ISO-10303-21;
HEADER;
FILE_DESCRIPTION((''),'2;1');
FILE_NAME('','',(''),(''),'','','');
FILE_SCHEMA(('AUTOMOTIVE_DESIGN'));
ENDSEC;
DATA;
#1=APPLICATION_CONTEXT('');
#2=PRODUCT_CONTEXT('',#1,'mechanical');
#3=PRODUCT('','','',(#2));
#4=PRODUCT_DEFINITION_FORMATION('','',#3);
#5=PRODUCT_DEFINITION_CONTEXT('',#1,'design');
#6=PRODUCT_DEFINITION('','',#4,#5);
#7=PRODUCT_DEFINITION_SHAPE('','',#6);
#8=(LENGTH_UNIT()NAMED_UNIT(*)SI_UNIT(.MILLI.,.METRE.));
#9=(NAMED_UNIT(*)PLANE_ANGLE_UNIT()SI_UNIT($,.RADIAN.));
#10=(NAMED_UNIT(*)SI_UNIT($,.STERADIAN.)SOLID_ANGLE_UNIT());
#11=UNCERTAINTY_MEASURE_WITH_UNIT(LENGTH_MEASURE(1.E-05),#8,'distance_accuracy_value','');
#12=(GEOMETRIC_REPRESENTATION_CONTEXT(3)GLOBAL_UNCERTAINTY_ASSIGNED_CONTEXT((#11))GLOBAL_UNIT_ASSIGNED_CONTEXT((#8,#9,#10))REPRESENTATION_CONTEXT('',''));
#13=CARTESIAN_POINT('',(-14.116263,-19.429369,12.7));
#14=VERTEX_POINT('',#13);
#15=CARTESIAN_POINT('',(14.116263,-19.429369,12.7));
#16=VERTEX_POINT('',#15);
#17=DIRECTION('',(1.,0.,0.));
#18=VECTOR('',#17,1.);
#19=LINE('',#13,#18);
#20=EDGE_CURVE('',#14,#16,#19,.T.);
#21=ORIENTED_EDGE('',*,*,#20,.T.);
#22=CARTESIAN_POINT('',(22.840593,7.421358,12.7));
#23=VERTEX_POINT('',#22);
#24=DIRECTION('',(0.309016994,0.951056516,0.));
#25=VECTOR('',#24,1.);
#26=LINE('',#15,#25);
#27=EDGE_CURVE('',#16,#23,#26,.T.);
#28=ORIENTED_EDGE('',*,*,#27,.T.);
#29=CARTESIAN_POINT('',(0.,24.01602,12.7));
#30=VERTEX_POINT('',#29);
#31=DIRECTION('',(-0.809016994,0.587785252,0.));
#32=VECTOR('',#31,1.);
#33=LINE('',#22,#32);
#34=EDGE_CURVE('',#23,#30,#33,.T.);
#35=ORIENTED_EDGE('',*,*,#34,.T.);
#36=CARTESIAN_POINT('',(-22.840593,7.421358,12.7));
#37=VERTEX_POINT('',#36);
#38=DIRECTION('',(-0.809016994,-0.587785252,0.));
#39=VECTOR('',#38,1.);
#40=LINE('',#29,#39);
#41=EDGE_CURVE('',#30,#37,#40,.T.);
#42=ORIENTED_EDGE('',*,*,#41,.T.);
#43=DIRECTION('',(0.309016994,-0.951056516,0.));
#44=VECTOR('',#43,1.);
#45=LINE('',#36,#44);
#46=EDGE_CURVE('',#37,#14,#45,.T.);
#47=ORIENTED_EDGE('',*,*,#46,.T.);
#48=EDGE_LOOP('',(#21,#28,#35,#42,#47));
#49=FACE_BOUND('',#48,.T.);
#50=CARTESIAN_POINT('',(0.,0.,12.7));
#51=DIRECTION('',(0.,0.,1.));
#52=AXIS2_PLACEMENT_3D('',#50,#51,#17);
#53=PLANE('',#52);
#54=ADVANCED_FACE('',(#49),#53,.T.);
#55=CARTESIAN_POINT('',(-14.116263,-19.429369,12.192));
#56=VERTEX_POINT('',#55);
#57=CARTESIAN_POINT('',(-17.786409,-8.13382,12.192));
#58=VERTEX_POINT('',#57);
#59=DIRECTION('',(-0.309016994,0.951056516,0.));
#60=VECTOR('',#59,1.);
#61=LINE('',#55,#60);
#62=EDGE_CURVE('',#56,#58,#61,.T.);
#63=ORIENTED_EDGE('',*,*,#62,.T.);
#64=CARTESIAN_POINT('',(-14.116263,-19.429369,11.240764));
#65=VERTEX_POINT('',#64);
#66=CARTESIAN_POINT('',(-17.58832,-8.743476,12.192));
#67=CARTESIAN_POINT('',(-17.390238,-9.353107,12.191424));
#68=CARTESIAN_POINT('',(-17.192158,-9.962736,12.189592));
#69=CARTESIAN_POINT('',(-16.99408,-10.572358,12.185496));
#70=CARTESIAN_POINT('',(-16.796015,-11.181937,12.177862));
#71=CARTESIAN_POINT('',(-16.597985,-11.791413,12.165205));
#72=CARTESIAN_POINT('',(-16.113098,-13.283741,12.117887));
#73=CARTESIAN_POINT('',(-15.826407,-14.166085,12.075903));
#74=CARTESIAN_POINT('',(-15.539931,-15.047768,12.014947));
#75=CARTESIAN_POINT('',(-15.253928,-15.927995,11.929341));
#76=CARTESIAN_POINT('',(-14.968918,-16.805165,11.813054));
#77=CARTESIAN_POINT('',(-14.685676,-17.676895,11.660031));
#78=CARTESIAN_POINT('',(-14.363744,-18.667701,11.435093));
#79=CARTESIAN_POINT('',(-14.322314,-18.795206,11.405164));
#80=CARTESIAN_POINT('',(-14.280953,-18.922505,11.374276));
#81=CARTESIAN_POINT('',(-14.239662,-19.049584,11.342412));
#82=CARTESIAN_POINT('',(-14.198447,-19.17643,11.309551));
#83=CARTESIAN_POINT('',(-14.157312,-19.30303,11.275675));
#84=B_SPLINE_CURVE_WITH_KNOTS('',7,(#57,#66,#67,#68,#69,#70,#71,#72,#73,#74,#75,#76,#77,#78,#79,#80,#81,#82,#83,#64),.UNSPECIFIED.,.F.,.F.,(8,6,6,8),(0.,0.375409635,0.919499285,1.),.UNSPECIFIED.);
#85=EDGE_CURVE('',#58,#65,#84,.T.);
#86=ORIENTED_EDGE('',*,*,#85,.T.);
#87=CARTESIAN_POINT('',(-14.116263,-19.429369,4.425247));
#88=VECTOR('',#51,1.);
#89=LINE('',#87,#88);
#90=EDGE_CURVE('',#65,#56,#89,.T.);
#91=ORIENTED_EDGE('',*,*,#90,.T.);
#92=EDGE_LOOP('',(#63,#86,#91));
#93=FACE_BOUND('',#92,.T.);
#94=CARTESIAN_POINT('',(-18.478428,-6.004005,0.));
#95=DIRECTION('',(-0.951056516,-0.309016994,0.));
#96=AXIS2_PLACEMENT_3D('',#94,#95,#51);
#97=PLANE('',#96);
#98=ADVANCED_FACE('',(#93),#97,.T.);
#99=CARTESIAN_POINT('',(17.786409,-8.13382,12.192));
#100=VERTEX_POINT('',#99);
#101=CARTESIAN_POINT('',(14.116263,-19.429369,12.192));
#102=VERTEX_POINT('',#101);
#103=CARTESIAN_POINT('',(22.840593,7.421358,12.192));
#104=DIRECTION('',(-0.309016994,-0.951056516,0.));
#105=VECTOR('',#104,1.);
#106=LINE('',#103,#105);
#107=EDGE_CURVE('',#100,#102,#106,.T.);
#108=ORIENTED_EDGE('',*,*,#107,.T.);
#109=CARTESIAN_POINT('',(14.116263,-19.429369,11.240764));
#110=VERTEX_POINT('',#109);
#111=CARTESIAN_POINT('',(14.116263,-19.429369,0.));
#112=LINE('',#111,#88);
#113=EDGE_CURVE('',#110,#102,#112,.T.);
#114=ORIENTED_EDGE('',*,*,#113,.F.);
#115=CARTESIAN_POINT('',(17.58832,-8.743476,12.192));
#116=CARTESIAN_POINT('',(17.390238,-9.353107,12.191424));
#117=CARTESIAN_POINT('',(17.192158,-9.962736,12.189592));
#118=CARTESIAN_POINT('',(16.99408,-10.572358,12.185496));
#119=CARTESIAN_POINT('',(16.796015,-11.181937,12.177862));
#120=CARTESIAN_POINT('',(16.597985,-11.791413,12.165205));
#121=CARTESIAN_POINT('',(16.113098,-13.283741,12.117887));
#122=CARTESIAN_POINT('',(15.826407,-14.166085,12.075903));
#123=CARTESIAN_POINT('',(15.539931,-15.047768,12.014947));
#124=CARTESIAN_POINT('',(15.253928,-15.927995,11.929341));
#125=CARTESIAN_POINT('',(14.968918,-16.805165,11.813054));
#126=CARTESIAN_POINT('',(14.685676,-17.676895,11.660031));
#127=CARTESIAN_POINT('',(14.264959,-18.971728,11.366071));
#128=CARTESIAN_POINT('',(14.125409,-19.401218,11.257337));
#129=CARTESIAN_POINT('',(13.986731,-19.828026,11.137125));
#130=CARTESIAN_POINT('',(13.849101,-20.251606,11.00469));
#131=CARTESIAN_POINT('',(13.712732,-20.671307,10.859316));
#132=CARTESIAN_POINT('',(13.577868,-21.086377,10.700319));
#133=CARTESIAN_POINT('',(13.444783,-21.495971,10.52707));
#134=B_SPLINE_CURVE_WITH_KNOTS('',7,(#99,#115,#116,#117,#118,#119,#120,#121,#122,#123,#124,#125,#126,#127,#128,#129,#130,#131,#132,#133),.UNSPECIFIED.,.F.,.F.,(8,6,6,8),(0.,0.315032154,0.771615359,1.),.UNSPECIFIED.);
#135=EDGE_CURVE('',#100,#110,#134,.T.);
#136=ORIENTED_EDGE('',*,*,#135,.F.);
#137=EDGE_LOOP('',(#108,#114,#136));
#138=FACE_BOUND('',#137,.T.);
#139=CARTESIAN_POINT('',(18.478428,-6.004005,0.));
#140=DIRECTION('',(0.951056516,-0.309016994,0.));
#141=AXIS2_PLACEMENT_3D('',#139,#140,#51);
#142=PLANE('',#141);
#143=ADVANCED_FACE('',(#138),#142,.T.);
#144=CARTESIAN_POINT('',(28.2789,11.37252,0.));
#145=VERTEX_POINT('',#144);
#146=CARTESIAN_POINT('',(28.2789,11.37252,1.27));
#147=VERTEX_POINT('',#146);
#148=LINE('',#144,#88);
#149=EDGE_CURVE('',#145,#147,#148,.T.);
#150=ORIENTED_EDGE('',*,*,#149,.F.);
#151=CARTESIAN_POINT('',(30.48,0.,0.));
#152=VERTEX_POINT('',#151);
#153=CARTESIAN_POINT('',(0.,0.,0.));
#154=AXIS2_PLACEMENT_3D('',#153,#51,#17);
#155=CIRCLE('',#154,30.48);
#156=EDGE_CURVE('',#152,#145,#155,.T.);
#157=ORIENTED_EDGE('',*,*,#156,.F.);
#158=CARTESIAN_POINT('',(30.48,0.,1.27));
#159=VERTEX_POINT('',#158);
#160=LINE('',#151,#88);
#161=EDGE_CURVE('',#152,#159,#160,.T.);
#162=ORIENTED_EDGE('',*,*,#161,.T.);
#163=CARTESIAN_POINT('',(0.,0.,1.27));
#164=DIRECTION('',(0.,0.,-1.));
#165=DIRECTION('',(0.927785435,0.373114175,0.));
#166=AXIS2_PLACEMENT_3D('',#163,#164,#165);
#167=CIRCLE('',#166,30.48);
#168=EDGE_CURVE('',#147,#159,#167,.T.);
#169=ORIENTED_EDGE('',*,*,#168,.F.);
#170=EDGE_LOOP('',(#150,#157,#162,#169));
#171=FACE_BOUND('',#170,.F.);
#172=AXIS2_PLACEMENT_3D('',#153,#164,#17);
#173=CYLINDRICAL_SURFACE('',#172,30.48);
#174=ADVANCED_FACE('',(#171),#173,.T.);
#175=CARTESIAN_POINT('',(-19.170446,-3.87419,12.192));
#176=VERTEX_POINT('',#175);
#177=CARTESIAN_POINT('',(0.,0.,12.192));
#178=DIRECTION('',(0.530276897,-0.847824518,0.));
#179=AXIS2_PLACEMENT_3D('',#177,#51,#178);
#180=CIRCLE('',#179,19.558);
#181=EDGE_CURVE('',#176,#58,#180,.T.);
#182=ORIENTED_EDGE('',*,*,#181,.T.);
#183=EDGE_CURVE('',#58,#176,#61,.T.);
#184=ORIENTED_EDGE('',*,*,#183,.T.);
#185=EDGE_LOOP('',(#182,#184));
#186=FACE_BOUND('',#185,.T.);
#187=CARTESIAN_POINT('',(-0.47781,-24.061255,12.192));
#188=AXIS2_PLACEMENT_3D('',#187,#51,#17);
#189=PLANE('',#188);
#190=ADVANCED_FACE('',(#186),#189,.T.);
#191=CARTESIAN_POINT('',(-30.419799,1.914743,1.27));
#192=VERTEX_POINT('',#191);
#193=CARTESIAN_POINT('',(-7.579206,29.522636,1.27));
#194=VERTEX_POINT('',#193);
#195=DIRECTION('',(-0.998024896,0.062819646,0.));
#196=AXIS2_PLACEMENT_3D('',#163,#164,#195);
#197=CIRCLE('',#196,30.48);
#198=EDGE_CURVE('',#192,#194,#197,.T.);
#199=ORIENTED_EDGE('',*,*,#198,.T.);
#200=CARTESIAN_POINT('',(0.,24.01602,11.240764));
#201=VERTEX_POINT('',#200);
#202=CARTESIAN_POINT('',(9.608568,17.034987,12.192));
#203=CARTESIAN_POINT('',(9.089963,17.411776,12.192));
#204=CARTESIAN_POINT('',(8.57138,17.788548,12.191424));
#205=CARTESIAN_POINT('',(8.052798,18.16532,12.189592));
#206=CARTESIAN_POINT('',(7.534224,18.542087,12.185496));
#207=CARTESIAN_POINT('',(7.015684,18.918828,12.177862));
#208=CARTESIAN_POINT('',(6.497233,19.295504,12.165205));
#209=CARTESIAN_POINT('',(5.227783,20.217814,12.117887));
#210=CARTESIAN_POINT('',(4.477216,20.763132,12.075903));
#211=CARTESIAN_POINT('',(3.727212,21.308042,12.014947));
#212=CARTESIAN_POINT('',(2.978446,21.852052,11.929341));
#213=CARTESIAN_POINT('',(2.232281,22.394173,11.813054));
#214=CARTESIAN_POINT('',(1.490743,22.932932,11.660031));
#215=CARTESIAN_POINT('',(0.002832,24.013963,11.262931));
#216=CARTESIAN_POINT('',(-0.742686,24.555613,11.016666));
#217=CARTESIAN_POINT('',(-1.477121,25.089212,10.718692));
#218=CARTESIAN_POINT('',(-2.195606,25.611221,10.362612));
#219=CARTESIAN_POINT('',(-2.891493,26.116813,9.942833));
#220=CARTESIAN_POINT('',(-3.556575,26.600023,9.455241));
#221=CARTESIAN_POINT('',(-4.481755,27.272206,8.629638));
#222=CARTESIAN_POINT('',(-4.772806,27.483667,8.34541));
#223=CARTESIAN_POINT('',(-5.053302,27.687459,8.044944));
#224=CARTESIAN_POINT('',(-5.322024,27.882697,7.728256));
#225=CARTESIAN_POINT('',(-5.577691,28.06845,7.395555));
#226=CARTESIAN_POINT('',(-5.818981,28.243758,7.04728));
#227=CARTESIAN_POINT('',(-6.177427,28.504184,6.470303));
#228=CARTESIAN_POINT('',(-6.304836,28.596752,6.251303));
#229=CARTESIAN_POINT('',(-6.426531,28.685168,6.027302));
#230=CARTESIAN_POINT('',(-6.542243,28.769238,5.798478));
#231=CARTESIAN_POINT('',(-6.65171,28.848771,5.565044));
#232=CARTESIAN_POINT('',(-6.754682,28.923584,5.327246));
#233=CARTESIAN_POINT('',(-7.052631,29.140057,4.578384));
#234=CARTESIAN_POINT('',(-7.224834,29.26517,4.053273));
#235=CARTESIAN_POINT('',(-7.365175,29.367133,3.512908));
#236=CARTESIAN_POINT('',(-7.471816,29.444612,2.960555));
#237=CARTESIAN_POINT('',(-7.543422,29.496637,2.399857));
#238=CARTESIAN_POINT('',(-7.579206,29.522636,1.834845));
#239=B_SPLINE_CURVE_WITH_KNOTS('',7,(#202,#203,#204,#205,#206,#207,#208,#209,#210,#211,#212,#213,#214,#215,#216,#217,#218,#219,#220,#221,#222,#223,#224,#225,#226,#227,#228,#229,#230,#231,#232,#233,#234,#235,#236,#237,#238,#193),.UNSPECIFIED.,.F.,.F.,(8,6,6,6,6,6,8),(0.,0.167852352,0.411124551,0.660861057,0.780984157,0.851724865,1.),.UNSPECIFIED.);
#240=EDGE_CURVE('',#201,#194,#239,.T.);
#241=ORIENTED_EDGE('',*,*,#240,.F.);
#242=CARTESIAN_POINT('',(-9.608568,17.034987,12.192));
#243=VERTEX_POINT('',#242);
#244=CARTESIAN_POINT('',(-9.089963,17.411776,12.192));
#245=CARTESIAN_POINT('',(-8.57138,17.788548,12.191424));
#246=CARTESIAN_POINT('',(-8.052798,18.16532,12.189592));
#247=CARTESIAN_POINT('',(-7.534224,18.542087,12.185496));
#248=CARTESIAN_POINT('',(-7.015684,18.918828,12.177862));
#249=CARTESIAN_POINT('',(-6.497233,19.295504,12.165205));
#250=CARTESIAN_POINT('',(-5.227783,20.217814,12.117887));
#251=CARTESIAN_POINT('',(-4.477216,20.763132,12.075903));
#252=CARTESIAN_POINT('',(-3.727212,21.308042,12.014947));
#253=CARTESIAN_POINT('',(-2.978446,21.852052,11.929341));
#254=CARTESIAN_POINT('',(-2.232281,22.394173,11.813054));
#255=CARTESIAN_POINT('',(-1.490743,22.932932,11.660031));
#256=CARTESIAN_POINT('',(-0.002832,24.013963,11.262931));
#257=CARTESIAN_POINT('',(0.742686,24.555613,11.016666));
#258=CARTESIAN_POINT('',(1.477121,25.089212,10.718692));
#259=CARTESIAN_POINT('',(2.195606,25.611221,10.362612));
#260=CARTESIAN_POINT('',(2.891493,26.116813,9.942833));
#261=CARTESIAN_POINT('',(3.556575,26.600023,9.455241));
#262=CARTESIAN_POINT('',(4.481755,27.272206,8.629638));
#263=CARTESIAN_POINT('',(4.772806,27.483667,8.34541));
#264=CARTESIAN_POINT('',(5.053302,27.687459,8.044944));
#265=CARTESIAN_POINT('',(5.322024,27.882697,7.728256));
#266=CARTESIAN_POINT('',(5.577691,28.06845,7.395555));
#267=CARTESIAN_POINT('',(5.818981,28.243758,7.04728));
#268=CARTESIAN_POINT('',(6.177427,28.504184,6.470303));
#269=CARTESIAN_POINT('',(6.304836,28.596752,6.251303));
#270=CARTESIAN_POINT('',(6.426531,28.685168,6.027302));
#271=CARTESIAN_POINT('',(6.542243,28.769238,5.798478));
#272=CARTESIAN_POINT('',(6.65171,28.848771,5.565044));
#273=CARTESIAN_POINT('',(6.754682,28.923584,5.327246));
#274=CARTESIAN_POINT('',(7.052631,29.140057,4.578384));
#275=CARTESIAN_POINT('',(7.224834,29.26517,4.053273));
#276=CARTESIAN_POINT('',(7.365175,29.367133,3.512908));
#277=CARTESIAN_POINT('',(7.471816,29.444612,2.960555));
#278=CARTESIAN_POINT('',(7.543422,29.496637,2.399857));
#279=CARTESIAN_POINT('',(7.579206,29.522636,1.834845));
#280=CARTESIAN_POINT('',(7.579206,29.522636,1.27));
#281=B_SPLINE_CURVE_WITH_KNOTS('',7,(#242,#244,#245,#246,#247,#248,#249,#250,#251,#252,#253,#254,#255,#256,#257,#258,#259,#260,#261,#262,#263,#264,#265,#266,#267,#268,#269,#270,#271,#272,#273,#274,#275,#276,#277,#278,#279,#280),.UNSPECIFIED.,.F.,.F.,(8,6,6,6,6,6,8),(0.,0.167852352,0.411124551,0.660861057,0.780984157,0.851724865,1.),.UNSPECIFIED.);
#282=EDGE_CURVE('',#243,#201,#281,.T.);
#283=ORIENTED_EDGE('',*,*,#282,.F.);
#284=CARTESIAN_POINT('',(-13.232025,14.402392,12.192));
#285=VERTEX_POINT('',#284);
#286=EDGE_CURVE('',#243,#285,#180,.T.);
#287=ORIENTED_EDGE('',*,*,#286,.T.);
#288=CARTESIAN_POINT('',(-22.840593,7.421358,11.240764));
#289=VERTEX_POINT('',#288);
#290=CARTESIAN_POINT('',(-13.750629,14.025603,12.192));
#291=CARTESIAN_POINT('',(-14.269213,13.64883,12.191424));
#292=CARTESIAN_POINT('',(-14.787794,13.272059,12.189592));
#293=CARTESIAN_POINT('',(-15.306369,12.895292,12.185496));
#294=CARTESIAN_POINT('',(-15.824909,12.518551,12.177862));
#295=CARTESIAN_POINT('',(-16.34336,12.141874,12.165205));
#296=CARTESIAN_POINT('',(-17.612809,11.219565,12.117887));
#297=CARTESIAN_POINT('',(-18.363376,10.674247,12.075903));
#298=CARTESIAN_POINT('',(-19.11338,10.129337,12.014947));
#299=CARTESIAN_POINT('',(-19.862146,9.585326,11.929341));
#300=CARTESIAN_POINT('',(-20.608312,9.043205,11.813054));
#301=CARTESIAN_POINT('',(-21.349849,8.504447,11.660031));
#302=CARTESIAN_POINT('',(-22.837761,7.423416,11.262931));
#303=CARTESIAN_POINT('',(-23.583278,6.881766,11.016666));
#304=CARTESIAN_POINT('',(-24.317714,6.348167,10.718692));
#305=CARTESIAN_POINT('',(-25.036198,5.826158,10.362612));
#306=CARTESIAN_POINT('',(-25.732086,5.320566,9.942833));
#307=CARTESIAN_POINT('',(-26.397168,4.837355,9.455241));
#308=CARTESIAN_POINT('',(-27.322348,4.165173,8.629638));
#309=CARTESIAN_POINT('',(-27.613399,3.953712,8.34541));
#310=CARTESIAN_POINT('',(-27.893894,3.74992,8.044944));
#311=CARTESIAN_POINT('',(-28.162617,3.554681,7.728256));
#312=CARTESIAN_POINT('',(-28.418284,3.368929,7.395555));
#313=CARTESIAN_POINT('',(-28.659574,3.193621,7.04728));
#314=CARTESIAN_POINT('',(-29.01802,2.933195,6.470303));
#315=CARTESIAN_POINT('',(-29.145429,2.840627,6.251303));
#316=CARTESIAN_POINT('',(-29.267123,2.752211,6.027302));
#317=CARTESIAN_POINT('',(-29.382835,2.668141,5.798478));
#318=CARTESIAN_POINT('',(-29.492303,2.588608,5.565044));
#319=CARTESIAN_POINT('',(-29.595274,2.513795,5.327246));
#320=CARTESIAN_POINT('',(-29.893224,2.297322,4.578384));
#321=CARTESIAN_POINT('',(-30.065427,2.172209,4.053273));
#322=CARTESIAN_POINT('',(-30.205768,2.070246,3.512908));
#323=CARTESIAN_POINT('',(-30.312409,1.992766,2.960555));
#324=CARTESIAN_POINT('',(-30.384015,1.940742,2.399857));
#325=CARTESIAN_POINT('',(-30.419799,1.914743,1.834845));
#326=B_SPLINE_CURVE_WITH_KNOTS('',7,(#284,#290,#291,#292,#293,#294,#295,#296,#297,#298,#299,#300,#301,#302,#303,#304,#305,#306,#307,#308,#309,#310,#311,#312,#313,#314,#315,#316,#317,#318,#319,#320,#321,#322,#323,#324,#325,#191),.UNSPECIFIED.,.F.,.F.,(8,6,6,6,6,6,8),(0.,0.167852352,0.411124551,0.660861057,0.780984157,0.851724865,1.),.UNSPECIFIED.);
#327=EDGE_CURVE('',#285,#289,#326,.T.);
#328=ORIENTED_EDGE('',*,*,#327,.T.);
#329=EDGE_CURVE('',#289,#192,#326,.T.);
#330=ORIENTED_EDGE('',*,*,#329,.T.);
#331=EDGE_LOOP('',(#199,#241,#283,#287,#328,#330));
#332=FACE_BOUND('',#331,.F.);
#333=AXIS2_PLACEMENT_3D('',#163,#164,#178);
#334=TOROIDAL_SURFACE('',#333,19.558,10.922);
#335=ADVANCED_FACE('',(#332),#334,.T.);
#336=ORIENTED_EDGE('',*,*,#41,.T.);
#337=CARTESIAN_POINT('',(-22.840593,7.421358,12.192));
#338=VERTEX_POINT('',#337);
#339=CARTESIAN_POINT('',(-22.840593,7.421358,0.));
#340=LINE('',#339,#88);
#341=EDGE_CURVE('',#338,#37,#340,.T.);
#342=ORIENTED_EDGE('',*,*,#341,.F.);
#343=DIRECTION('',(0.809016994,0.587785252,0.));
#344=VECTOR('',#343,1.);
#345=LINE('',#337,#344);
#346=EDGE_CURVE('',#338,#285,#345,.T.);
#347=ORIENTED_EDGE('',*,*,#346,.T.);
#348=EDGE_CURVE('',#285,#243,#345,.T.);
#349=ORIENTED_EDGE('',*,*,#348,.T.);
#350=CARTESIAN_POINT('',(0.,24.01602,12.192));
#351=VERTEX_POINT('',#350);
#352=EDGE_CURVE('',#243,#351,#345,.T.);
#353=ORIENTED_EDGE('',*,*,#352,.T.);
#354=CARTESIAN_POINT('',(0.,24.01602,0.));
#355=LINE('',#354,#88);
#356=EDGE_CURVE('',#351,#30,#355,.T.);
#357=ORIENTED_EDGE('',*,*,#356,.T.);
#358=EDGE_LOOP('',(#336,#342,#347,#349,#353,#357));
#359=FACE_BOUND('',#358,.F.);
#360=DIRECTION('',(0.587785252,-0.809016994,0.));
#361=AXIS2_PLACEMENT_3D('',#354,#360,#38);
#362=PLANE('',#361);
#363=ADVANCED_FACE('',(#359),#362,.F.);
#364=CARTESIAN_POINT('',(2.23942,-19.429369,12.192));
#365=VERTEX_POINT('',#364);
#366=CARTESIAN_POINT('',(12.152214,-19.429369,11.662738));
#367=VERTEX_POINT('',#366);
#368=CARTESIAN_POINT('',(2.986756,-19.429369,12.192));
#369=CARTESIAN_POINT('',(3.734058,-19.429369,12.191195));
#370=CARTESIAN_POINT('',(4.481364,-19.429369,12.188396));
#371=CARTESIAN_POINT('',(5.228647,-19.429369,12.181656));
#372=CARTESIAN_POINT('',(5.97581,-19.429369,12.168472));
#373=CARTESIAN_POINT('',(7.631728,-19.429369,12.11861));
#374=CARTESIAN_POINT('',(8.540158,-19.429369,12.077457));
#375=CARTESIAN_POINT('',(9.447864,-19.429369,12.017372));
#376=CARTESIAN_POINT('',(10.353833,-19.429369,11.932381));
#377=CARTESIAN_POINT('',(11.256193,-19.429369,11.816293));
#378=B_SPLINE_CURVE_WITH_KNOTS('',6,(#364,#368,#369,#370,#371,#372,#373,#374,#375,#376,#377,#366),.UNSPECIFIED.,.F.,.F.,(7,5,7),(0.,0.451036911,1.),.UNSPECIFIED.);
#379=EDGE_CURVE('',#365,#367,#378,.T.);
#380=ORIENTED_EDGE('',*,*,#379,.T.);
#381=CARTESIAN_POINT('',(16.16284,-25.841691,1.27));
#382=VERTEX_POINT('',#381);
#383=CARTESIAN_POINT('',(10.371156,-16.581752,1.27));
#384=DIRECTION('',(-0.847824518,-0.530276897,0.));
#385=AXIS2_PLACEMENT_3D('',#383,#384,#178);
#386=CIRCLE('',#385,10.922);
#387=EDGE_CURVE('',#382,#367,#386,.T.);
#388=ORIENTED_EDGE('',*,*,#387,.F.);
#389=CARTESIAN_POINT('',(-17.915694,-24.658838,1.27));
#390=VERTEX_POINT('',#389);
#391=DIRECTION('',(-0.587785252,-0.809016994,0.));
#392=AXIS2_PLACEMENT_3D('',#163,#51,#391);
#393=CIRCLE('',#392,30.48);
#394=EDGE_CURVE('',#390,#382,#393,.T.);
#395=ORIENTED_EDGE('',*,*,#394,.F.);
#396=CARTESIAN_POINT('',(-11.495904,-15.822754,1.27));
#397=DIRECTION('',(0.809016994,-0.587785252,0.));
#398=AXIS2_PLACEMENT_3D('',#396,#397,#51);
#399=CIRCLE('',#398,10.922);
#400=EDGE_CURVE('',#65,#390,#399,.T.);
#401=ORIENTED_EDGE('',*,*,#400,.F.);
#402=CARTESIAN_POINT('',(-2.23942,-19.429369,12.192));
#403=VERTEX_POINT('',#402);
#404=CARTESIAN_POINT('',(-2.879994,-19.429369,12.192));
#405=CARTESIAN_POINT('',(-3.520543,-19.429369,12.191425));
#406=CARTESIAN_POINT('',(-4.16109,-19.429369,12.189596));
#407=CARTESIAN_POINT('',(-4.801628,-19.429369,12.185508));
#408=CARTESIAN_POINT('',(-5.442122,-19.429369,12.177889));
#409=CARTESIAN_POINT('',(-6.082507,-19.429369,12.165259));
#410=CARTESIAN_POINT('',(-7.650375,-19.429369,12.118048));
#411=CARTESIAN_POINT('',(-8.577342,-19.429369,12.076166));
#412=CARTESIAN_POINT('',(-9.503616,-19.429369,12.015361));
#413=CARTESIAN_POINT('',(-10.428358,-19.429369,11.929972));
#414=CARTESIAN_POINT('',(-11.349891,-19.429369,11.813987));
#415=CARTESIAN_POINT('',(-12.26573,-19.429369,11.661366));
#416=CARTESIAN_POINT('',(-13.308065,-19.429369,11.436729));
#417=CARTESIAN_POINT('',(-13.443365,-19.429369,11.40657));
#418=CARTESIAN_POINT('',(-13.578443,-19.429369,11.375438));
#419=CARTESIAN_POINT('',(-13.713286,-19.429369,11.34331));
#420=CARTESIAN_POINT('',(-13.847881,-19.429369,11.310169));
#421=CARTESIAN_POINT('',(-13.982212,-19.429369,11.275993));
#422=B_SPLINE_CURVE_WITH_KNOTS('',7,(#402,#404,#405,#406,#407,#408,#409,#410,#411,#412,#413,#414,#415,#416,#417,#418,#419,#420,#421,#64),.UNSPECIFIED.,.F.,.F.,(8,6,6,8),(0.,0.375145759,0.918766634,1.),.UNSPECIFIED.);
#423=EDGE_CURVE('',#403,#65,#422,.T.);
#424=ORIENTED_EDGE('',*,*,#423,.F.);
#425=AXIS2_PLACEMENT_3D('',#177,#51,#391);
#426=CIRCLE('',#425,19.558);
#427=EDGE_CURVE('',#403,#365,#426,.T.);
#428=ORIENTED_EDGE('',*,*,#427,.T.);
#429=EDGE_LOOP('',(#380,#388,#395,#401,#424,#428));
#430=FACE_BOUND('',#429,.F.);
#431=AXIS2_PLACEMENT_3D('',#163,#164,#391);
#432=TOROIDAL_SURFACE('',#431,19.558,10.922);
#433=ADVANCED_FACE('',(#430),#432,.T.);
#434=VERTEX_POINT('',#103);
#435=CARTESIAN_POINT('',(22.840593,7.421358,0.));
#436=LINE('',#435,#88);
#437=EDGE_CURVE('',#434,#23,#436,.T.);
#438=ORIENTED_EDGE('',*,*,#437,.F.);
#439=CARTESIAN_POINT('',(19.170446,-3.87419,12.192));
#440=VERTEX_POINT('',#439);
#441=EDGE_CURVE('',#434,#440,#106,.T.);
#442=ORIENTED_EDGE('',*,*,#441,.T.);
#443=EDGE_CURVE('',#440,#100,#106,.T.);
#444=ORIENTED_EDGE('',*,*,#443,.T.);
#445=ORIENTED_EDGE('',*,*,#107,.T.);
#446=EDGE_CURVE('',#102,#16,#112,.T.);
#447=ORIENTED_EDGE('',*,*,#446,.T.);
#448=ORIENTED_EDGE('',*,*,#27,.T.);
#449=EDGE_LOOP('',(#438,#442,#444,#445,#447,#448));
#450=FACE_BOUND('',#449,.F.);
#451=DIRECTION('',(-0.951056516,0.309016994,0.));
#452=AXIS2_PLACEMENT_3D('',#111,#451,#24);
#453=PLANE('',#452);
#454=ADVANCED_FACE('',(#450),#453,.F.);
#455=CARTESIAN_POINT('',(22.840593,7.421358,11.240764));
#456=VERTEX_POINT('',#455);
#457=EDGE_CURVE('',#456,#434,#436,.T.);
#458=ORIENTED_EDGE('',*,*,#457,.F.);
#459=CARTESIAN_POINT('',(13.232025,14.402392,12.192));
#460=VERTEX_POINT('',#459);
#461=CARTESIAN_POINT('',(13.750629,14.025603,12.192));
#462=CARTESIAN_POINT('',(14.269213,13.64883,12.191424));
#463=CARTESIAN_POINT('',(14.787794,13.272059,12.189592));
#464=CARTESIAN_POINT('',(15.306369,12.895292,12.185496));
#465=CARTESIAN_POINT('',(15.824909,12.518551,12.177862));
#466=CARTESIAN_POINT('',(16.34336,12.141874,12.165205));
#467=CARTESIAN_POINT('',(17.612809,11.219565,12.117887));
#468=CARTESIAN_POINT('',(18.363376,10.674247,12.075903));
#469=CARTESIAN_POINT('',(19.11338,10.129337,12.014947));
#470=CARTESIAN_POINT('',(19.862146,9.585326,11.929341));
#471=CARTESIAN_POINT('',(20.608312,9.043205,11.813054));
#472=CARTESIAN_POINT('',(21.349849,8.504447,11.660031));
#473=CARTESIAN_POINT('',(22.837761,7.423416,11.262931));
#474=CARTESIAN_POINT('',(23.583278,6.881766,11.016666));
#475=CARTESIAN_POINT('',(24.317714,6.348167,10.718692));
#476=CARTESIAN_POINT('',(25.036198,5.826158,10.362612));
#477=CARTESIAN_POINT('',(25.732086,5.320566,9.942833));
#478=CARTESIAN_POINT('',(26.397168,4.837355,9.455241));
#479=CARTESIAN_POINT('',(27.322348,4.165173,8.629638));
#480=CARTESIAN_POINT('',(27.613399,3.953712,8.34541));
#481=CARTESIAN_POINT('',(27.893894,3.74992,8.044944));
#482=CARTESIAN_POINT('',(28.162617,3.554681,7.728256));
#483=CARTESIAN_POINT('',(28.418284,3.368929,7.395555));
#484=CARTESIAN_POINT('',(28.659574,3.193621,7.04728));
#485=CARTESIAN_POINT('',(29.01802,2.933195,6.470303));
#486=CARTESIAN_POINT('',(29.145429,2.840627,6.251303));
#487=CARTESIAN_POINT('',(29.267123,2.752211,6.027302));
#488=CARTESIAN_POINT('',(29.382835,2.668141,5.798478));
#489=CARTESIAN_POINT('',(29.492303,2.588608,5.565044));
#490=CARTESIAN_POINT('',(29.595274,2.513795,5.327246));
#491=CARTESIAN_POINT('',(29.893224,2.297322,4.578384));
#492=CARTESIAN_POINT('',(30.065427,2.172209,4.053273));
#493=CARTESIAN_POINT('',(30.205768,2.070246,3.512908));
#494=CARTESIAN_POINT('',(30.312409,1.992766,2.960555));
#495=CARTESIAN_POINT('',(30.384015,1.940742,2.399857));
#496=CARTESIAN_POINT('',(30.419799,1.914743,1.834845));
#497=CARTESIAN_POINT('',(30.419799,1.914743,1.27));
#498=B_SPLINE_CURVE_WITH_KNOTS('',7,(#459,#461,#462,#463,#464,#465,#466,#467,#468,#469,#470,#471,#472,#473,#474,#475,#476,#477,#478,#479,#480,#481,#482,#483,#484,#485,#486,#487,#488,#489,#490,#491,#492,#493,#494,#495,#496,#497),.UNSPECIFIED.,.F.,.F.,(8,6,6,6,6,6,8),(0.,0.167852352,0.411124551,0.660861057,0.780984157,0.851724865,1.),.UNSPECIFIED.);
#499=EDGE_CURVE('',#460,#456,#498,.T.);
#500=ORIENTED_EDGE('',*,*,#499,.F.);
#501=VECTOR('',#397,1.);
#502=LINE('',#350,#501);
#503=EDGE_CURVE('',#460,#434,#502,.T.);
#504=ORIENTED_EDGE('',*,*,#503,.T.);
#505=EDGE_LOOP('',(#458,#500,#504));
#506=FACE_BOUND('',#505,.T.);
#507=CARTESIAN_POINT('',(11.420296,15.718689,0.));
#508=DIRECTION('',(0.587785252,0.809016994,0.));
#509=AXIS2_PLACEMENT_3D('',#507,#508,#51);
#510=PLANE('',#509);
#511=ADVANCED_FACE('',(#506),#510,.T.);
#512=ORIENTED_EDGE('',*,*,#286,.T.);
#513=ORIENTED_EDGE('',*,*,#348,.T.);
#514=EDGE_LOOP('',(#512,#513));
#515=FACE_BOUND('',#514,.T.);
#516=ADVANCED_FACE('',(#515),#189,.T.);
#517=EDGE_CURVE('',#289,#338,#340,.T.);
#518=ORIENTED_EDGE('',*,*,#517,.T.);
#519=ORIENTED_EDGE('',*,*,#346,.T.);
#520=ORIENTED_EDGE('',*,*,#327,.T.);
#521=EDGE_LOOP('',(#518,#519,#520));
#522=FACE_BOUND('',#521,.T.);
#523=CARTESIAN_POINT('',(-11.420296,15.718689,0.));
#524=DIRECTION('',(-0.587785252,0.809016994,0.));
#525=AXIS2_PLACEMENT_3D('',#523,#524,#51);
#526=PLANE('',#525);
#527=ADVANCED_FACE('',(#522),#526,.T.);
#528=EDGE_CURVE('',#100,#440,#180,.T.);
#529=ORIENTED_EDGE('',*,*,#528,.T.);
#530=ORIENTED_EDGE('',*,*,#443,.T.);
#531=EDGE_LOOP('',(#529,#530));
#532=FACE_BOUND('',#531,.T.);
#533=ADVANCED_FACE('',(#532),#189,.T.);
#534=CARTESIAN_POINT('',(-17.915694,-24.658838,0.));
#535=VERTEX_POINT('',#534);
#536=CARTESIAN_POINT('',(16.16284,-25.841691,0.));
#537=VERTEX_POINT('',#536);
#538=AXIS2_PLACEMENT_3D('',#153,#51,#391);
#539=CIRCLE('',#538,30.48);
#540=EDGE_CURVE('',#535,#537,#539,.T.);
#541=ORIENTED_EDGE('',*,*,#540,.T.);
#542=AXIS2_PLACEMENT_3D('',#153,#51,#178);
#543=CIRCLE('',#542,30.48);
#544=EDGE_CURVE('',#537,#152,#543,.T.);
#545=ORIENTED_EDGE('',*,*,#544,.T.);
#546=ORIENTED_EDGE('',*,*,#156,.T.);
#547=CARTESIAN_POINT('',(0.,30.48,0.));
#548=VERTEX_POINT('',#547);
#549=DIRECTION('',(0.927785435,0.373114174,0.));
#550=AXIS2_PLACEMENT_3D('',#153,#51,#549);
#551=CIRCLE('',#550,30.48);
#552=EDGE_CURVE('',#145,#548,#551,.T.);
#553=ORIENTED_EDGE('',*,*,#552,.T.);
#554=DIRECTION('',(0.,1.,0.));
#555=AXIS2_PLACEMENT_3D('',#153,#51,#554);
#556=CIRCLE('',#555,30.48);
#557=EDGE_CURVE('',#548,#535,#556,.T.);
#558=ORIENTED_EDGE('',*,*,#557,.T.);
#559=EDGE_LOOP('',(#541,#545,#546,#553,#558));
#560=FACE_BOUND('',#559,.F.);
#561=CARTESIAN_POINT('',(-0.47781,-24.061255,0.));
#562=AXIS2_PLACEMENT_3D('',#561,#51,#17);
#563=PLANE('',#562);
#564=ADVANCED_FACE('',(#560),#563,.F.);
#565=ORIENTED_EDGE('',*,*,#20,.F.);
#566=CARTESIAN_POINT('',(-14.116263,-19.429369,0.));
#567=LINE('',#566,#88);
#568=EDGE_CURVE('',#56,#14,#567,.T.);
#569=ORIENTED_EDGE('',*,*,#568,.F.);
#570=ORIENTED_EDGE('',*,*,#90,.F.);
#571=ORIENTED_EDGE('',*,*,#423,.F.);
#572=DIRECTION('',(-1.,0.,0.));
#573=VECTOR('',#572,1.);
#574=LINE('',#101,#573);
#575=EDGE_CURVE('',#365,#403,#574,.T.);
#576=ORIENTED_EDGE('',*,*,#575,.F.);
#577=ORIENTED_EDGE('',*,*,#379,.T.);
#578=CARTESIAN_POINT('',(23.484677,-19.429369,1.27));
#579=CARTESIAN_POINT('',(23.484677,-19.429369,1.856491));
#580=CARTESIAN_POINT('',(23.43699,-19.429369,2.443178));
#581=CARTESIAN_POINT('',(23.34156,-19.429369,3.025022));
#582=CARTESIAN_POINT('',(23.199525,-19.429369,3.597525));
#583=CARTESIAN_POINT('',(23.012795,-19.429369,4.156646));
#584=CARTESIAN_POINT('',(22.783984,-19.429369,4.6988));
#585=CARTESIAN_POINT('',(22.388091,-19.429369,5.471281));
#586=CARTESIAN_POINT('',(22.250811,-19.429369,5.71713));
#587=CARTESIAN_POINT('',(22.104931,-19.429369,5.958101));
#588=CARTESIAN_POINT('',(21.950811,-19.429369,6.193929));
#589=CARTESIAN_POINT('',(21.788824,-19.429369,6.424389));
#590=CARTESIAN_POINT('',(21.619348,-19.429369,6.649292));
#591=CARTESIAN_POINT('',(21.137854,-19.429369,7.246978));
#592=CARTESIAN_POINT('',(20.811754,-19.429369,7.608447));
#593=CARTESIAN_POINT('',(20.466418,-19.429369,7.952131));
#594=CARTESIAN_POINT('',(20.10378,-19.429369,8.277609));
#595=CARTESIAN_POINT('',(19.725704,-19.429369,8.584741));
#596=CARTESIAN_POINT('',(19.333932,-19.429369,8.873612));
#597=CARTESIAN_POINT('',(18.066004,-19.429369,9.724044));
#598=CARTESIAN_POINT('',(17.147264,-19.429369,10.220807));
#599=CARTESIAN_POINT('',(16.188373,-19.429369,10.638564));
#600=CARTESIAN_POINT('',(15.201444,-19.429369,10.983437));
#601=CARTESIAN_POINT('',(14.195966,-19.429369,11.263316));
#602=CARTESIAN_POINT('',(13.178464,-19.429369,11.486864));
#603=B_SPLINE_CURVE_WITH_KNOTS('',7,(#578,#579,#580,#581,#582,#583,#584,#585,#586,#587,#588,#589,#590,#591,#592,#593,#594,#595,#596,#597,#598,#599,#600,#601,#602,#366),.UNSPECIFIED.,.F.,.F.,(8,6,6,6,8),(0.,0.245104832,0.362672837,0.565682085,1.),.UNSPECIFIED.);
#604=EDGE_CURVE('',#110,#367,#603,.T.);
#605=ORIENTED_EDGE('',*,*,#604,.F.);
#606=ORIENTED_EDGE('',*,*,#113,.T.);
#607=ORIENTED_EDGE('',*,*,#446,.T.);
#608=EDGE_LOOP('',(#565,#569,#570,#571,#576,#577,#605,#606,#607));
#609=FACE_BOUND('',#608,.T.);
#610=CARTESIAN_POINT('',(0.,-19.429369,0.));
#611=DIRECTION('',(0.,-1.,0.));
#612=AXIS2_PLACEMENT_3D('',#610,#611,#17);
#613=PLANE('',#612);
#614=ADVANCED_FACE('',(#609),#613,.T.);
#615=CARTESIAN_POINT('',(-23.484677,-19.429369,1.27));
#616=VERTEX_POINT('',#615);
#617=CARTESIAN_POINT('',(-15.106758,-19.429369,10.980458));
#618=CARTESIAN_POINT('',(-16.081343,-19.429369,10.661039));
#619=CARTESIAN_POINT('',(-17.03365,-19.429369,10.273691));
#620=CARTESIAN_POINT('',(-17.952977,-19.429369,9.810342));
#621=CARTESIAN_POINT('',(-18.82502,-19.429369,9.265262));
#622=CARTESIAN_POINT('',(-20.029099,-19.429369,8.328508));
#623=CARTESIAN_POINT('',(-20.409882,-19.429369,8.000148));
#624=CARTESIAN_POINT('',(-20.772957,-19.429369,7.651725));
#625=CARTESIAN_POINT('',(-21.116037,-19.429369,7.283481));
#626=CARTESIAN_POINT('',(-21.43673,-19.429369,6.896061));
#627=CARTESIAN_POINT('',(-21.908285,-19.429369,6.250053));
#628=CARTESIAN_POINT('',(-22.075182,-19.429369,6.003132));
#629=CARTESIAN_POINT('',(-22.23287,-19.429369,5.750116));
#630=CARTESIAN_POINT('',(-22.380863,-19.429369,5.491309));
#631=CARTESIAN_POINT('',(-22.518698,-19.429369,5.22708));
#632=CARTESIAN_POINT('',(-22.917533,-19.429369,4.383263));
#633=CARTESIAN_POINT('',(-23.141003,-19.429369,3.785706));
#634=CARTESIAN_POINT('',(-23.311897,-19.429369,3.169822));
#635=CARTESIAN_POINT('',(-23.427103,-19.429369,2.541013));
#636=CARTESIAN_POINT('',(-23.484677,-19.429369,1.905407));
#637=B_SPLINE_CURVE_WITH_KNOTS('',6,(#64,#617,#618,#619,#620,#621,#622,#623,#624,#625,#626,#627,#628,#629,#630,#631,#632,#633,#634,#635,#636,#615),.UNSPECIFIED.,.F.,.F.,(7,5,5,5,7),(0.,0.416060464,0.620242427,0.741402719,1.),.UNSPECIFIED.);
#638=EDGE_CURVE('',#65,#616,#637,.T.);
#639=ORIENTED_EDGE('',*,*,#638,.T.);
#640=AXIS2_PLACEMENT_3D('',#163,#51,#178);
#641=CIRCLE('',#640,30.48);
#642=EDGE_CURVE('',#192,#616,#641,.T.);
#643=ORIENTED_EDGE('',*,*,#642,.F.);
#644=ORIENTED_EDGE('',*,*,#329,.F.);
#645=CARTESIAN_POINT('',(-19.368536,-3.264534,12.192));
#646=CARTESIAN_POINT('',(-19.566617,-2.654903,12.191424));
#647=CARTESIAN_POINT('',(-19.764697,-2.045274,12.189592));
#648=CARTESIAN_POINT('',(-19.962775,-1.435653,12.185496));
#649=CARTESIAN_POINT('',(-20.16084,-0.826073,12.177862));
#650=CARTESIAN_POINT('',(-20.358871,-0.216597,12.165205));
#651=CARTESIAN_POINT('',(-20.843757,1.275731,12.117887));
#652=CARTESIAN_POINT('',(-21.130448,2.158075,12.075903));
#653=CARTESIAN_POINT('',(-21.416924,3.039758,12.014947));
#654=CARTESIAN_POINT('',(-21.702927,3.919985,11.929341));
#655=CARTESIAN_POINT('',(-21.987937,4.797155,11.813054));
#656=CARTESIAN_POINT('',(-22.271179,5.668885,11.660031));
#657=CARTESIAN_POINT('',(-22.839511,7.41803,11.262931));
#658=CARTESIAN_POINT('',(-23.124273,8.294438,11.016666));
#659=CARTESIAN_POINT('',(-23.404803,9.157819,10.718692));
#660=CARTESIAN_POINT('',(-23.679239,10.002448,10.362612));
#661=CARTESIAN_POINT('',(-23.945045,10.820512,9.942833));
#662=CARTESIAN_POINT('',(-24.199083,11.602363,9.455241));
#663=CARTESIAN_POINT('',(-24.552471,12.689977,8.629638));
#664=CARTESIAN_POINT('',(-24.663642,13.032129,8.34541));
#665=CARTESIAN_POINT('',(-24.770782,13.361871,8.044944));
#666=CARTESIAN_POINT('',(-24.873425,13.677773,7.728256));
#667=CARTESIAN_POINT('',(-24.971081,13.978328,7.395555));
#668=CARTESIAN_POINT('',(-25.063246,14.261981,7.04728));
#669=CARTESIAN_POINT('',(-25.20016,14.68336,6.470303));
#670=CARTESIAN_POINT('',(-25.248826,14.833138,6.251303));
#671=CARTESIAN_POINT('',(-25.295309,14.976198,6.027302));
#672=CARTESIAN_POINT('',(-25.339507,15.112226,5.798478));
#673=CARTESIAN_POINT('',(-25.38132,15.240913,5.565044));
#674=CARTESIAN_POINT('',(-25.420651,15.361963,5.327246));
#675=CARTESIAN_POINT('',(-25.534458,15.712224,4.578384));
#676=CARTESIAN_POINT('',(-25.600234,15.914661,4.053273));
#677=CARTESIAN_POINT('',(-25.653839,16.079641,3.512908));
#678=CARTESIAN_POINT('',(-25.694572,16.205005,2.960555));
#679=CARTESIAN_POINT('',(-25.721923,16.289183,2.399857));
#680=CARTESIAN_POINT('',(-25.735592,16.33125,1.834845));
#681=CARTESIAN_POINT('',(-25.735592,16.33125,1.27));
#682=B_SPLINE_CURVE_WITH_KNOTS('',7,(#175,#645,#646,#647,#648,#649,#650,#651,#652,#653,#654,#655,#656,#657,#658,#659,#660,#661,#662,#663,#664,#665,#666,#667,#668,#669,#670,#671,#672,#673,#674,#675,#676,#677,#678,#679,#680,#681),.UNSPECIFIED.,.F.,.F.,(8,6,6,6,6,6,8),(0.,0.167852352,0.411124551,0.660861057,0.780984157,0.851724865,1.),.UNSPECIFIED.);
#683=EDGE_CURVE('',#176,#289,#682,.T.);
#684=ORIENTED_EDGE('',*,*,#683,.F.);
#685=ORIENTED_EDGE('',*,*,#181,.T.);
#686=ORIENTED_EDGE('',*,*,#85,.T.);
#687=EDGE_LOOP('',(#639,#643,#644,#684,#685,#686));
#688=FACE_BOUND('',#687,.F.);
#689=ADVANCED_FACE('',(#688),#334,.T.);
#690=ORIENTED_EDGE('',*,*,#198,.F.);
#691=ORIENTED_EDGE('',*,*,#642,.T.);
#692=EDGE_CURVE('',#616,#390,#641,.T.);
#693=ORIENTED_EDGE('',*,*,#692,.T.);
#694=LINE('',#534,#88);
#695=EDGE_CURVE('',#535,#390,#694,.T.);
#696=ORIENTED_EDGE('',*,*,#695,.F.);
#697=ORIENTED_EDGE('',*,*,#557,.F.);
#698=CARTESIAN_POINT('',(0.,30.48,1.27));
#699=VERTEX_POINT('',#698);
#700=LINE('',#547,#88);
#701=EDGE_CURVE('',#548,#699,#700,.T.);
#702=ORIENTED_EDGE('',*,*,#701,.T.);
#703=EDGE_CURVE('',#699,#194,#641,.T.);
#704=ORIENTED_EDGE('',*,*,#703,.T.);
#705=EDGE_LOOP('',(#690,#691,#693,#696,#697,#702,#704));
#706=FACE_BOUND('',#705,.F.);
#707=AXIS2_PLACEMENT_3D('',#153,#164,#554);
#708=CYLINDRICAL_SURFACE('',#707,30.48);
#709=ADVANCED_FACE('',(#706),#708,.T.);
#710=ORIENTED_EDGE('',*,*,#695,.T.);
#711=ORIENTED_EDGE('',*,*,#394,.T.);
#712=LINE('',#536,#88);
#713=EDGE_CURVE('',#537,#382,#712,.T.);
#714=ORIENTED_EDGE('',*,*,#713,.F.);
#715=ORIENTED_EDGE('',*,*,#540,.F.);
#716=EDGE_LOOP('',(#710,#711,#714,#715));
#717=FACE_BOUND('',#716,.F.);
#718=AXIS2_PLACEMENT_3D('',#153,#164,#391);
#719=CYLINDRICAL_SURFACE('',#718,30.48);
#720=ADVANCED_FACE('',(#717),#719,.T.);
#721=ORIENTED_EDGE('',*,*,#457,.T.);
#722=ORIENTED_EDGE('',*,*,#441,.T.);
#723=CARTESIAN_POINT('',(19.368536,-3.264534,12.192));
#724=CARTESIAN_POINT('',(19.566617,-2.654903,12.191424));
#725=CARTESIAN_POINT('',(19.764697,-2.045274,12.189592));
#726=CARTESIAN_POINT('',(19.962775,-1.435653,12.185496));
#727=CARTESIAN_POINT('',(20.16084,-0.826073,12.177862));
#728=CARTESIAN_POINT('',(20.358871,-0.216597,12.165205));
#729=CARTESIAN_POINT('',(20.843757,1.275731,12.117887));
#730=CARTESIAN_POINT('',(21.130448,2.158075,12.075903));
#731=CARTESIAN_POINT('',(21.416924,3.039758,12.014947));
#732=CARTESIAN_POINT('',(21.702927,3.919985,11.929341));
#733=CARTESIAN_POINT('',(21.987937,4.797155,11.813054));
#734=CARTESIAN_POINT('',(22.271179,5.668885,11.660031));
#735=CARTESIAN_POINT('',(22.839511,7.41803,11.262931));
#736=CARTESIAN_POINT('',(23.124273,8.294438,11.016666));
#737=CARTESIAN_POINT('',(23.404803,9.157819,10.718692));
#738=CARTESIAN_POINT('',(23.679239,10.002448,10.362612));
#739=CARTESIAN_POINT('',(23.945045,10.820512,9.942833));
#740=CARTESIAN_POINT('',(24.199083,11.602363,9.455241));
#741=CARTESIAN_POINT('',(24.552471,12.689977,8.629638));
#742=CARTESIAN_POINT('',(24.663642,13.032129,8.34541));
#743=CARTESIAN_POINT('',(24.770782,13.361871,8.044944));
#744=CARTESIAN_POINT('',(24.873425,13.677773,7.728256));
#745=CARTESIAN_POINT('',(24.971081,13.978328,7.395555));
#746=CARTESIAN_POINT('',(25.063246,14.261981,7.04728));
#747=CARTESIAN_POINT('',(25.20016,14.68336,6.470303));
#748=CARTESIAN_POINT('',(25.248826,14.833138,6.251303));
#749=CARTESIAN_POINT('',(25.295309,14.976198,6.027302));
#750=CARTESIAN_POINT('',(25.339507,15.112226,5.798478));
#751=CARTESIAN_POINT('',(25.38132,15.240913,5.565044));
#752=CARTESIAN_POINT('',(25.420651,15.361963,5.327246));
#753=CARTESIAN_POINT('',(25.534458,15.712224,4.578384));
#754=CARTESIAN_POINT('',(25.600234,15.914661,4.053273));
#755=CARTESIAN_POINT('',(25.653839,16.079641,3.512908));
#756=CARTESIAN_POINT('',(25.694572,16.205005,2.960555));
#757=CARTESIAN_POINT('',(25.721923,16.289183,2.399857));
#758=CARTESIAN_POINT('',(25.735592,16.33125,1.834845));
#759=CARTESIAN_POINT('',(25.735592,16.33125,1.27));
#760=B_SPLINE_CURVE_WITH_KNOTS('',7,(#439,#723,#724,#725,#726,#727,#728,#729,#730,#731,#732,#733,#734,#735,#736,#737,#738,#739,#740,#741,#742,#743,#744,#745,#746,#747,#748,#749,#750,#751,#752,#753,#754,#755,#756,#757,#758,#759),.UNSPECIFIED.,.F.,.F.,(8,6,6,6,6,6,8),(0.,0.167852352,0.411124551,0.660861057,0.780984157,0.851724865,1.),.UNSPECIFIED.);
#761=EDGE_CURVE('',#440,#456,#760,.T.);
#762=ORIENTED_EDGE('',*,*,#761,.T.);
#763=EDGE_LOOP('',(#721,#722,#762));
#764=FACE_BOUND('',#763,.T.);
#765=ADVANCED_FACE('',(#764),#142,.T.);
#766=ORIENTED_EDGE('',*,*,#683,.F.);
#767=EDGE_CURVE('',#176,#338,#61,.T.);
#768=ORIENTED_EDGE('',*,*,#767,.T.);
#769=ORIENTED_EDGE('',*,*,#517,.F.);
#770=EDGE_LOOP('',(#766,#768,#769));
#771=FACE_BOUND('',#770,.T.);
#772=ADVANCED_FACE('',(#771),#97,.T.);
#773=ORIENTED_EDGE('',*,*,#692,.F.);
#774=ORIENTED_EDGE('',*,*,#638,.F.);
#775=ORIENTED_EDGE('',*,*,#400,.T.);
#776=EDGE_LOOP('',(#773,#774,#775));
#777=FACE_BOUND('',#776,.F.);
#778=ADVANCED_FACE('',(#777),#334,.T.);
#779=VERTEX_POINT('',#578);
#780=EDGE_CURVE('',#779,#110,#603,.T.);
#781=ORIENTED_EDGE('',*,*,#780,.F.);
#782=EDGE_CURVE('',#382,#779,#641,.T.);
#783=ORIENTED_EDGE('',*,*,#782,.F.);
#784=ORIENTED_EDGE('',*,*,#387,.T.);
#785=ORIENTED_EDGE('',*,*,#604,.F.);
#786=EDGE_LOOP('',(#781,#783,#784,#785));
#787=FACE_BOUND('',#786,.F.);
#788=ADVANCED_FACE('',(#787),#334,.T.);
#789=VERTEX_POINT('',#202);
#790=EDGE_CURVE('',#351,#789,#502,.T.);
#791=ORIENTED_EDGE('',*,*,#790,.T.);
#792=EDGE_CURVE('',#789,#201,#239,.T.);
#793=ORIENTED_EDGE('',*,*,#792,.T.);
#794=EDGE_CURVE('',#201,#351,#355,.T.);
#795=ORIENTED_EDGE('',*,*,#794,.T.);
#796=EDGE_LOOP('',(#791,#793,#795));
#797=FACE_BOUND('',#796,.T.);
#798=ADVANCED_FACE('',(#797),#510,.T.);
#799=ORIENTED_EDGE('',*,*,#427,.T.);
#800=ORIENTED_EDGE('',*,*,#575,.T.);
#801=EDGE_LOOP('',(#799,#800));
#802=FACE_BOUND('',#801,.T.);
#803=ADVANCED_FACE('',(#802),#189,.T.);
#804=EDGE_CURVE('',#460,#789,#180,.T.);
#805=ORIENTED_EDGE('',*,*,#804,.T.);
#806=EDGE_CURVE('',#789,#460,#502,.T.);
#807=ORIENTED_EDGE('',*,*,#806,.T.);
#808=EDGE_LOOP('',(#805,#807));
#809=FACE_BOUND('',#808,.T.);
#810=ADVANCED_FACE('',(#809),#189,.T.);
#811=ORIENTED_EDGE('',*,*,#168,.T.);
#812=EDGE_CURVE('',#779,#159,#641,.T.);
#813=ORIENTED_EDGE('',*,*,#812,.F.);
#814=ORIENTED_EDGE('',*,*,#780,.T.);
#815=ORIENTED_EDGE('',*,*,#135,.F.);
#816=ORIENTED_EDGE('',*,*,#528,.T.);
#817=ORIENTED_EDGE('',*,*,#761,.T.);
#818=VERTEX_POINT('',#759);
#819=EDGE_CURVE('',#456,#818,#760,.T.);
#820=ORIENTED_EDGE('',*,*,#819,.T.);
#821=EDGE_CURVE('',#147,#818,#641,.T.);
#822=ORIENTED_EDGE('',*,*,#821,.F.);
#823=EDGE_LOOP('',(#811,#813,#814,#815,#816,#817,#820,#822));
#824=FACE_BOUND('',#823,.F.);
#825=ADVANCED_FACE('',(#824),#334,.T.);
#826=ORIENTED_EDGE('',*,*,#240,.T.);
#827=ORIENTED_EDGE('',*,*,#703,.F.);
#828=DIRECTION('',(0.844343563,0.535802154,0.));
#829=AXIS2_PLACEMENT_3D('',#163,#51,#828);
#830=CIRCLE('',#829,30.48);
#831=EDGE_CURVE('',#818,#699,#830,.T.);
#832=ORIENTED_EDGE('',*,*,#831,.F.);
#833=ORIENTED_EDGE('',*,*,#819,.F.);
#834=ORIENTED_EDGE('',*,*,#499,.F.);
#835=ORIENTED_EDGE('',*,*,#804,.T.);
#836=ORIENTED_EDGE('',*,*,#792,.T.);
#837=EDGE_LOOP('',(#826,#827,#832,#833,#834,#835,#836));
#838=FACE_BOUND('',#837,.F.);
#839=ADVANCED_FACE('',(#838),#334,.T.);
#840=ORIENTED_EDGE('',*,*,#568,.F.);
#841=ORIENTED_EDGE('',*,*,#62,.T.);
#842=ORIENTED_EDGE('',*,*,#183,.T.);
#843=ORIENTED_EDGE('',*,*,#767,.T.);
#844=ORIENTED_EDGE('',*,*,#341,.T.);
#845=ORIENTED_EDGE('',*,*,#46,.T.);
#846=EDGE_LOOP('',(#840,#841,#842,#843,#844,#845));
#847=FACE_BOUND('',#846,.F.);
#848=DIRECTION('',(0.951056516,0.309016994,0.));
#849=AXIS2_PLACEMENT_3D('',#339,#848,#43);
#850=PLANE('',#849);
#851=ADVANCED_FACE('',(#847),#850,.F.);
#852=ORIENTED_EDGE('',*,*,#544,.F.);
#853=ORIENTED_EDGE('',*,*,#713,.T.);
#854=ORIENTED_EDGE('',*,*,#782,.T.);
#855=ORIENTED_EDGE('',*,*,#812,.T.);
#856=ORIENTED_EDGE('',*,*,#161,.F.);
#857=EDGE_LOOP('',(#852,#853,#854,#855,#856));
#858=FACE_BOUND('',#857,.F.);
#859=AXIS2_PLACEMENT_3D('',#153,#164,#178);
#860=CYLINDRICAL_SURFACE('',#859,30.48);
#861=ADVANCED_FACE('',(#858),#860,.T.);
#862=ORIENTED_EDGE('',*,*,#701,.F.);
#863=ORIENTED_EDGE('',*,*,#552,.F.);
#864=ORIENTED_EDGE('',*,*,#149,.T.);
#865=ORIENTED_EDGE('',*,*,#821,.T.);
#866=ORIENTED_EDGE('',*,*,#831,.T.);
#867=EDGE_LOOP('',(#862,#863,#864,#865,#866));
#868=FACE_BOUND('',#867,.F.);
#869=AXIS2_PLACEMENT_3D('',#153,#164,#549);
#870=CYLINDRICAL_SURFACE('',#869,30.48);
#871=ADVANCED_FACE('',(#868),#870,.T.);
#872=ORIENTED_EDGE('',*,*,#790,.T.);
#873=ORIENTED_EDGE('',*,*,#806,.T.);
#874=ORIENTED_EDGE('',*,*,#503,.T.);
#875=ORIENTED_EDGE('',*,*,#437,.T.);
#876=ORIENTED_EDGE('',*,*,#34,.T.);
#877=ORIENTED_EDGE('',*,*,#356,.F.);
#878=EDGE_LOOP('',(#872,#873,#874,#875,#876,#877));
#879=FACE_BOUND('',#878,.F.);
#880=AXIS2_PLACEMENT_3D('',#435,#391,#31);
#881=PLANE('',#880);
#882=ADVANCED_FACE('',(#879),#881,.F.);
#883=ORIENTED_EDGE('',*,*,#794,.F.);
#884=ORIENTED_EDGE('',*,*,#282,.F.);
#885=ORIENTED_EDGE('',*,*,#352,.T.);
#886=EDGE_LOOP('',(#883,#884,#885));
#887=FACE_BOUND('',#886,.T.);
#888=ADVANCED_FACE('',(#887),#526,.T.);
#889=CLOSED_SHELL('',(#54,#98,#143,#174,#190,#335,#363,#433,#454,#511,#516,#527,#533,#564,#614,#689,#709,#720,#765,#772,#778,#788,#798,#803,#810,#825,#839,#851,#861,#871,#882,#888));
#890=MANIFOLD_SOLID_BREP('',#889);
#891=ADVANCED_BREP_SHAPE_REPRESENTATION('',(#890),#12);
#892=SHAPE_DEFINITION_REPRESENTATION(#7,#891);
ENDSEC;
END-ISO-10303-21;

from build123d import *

# Parameters (mm, degrees)
F1_DEPTH     = 12.7
F2_DEPTH     = 12.192
F3_DEPTH     = 12.192
F4_DEPTH     = 12.192
F5_DEPTH     = 12.192
F6_DEPTH     = 12.192
F7_T4_ANGLE  = 291.9758344639
F7_T9_ANGLE  = 291.9758344639
F7_T14_ANGLE = 291.9758344639
F7_T19_ANGLE = 291.9758344639
F7_T24_ANGLE = 291.9758344639
F7_T29_ANGLE = 68.0241655361


# Not quite as in the source:
# - a fillet or chamfer that OpenCascade refuses, or shapes differently, is made with other operations: its cross-section is extruded or revolved along the edge and cut away or added


with BuildPart() as f1:
    # F0 (on Top) → F1 (new body)
    with BuildSketch(Plane.XY):
        Polygon((0, 24.0160203306), (-22.8405926309, 7.4213584194), (-14.1162625691, -19.4293685847), (14.1162625691, -19.4293685847), (22.8405926309, 7.4213584194), align=None)
    extrude(amount=F1_DEPTH)

    # F0 (on Top) → F2 (join)
    with BuildSketch(Plane.XY):
        with BuildLine():
            Line((-14.1162625691, -19.4293685847), (-22.8405926309, 7.4213584194))
            Line((-22.8405926309, 7.4213584194), (-28.2653771262, 11.4060885458))
            ThreePointArc((-28.2653771262, 11.4060885458), (-29.2974841135, -8.4076051653), (-17.9156944899, -24.6588379885))
            Line((-17.9156944899, -24.6588379885), (-14.1162625691, -19.4293685847))
        make_face()
    extrude(amount=F2_DEPTH)

    # F0 (on Top) → F3 (join)
    with BuildSketch(Plane.XY):
        with BuildLine():
            Line((-28.2653771262, 11.4060885458), (-22.8405926309, 7.4213584194))
            Line((-22.8405926309, 7.4213584194), (0, 24.0160203306))
            Line((0, 24.0160203306), (0, 30.48))
            ThreePointArc((0, 30.48), (-17.0495281625, 25.2654702992), (-28.2653771262, 11.4060885458))
        make_face()
    extrude(amount=F3_DEPTH)

    # F0 (on Top) → F4 (join)
    with BuildSketch(Plane.XY):
        with BuildLine():
            Line((0, 30.48), (0, 24.0160203306))
            Line((0, 24.0160203306), (22.8405926309, 7.4213584194))
            Line((22.8405926309, 7.4213584194), (28.2789000487, 11.3725200388))
            ThreePointArc((28.2789000487, 11.3725200388), (17.0645244472, 25.2553440957), (0, 30.48))
        make_face()
    extrude(amount=F4_DEPTH)

    # F0 (on Top) → F5 (join)
    with BuildSketch(Plane.XY):
        with BuildLine():
            Line((28.2789000487, 11.3725200388), (22.8405926309, 7.4213584194))
            Line((22.8405926309, 7.4213584194), (14.1162625691, -19.4293685847))
            Line((14.1162625691, -19.4293685847), (16.162839814, -25.8416912981))
            ThreePointArc((16.162839814, -25.8416912981), (26.6615243144, -14.7713750624), (30.48, 0))
            ThreePointArc((30.48, 0), (29.9246660256, 5.7917841169), (28.2789000487, 11.3725200388))
        make_face()
    extrude(amount=F5_DEPTH)

    # F0 (on Top) → F6 (join)
    with BuildSketch(Plane.XY):
        with BuildLine():
            Line((14.1162625691, -19.4293685847), (-14.1162625691, -19.4293685847))
            Line((-14.1162625691, -19.4293685847), (-17.9156944899, -24.6588379885))
            ThreePointArc((-17.9156944899, -24.6588379885), (-1.0573128046, -30.4616560553), (16.162839814, -25.8416912981))
            Line((16.162839814, -25.8416912981), (14.1162625691, -19.4293685847))
        make_face()
    extrude(amount=F6_DEPTH)

    # F7: fillet of radius 10.922 on 2 edges, made by hand


with BuildPart() as f7_tool2:
    # F7_s3 → F7_t4 (revolve)
    with BuildSketch(Plane(origin=(0, 0, 0), x_dir=(0, 0, 1), z_dir=(-0.8478245177, -0.5302768968, 0))):
        with BuildLine():
            ThreePointArc((12.192, -19.558), (8.9930202641, -27.2810202641), (1.27, -30.48))
            Line((1.27, -30.48), (12.192, -30.48))
            Line((12.192, -30.48), (12.192, -19.558))
        make_face()
    revolve(axis=Axis((0, 0, 12.192), (0, 0, 1)), revolution_arc=F7_T4_ANGLE)

    split(bisect_by=Plane.XZ.offset(19.4293685847), keep=Keep.TOP)


with BuildPart() as f1_1:
    add(f1.part)

    # F7_t1: cut F7_tool2
    add(f7_tool2.part, mode=Mode.SUBTRACT)


with BuildPart() as f7_tool7:
    # F7_s8 → F7_t9 (revolve)
    with BuildSketch(Plane(origin=(0, 0, 0), x_dir=(0, 0, 1), z_dir=(-0.8478245177, -0.5302768968, 0))):
        with BuildLine():
            ThreePointArc((12.192, -19.558), (8.9930202641, -27.2810202641), (1.27, -30.48))
            Line((1.27, -30.48), (12.192, -30.48))
            Line((12.192, -30.48), (12.192, -19.558))
        make_face()
    revolve(axis=Axis((0, 0, 12.192), (0, 0, 1)), revolution_arc=F7_T9_ANGLE)

    split(bisect_by=Plane(origin=(18.4784276, -6.0040050827, 0), x_dir=(0, 0, 1), z_dir=(0.9510565163, -0.3090169944, 0)), keep=Keep.TOP)


with BuildPart() as f1_2:
    add(f1_1.part)

    # F7_t6: cut F7_tool7
    add(f7_tool7.part, mode=Mode.SUBTRACT)


with BuildPart() as f7_tool12:
    # F7_s13 → F7_t14 (revolve)
    with BuildSketch(Plane(origin=(0, 0, 0), x_dir=(0, 0, 1), z_dir=(-0.8478245177, -0.5302768968, 0))):
        with BuildLine():
            ThreePointArc((12.192, -19.558), (8.9930202641, -27.2810202641), (1.27, -30.48))
            Line((1.27, -30.48), (12.192, -30.48))
            Line((12.192, -30.48), (12.192, -19.558))
        make_face()
    revolve(axis=Axis((0, 0, 12.192), (0, 0, 1)), revolution_arc=F7_T14_ANGLE)

    split(bisect_by=Plane(origin=(11.4202963155, 15.718689375, 0), x_dir=(0, 0, 1), z_dir=(0.5877852523, 0.8090169944, 0)), keep=Keep.TOP)


with BuildPart() as f1_3:
    add(f1_2.part)

    # F7_t11: cut F7_tool12
    add(f7_tool12.part, mode=Mode.SUBTRACT)


with BuildPart() as f7_tool17:
    # F7_s18 → F7_t19 (revolve)
    with BuildSketch(Plane(origin=(0, 0, 0), x_dir=(0, 0, 1), z_dir=(-0.8478245177, -0.5302768968, 0))):
        with BuildLine():
            ThreePointArc((12.192, -19.558), (8.9930202641, -27.2810202641), (1.27, -30.48))
            Line((1.27, -30.48), (12.192, -30.48))
            Line((12.192, -30.48), (12.192, -19.558))
        make_face()
    revolve(axis=Axis((0, 0, 12.192), (0, 0, 1)), revolution_arc=F7_T19_ANGLE)

    split(bisect_by=Plane(origin=(-11.4202963155, 15.718689375, 0), x_dir=(0, 0, 1), z_dir=(-0.5877852523, 0.8090169944, 0)), keep=Keep.TOP)


with BuildPart() as f1_4:
    add(f1_3.part)

    # F7_t16: cut F7_tool17
    add(f7_tool17.part, mode=Mode.SUBTRACT)


with BuildPart() as f7_tool22:
    # F7_s23 → F7_t24 (revolve)
    with BuildSketch(Plane(origin=(0, 0, 0), x_dir=(0, 0, 1), z_dir=(-0.8478245177, -0.5302768968, 0))):
        with BuildLine():
            ThreePointArc((12.192, -19.558), (8.9930202641, -27.2810202641), (1.27, -30.48))
            Line((1.27, -30.48), (12.192, -30.48))
            Line((12.192, -30.48), (12.192, -19.558))
        make_face()
    revolve(axis=Axis((0, 0, 12.192), (0, 0, 1)), revolution_arc=F7_T24_ANGLE)

    split(bisect_by=Plane(origin=(-18.4784276, -6.0040050827, 0), x_dir=(0, 0, 1), z_dir=(-0.9510565163, -0.3090169944, 0)), keep=Keep.TOP)


with BuildPart() as f1_5:
    add(f1_4.part)

    # F7_t21: cut F7_tool22
    add(f7_tool22.part, mode=Mode.SUBTRACT)


with BuildPart() as f7_tool27:
    # F7_s28 → F7_t29 (revolve)
    with BuildSketch(Plane(origin=(0, 0, 0), x_dir=(0, 0, 1), z_dir=(-0.8090169944, 0.5877852523, 0))):
        with BuildLine():
            ThreePointArc((12.192, -19.558), (8.9930202641, -27.2810202641), (1.27, -30.48))
            Line((1.27, -30.48), (12.192, -30.48))
            Line((12.192, -30.48), (12.192, -19.558))
        make_face()
    revolve(axis=Axis((0, 0, 12.192), (0, 0, 1)), revolution_arc=F7_T29_ANGLE)

    split(bisect_by=Plane.XZ.offset(19.4293685847), keep=Keep.TOP)


with BuildPart() as f1_6:
    add(f1_5.part)

    # F7_t26: cut F7_tool27
    add(f7_tool27.part, mode=Mode.SUBTRACT)


solid = f1_6.part
